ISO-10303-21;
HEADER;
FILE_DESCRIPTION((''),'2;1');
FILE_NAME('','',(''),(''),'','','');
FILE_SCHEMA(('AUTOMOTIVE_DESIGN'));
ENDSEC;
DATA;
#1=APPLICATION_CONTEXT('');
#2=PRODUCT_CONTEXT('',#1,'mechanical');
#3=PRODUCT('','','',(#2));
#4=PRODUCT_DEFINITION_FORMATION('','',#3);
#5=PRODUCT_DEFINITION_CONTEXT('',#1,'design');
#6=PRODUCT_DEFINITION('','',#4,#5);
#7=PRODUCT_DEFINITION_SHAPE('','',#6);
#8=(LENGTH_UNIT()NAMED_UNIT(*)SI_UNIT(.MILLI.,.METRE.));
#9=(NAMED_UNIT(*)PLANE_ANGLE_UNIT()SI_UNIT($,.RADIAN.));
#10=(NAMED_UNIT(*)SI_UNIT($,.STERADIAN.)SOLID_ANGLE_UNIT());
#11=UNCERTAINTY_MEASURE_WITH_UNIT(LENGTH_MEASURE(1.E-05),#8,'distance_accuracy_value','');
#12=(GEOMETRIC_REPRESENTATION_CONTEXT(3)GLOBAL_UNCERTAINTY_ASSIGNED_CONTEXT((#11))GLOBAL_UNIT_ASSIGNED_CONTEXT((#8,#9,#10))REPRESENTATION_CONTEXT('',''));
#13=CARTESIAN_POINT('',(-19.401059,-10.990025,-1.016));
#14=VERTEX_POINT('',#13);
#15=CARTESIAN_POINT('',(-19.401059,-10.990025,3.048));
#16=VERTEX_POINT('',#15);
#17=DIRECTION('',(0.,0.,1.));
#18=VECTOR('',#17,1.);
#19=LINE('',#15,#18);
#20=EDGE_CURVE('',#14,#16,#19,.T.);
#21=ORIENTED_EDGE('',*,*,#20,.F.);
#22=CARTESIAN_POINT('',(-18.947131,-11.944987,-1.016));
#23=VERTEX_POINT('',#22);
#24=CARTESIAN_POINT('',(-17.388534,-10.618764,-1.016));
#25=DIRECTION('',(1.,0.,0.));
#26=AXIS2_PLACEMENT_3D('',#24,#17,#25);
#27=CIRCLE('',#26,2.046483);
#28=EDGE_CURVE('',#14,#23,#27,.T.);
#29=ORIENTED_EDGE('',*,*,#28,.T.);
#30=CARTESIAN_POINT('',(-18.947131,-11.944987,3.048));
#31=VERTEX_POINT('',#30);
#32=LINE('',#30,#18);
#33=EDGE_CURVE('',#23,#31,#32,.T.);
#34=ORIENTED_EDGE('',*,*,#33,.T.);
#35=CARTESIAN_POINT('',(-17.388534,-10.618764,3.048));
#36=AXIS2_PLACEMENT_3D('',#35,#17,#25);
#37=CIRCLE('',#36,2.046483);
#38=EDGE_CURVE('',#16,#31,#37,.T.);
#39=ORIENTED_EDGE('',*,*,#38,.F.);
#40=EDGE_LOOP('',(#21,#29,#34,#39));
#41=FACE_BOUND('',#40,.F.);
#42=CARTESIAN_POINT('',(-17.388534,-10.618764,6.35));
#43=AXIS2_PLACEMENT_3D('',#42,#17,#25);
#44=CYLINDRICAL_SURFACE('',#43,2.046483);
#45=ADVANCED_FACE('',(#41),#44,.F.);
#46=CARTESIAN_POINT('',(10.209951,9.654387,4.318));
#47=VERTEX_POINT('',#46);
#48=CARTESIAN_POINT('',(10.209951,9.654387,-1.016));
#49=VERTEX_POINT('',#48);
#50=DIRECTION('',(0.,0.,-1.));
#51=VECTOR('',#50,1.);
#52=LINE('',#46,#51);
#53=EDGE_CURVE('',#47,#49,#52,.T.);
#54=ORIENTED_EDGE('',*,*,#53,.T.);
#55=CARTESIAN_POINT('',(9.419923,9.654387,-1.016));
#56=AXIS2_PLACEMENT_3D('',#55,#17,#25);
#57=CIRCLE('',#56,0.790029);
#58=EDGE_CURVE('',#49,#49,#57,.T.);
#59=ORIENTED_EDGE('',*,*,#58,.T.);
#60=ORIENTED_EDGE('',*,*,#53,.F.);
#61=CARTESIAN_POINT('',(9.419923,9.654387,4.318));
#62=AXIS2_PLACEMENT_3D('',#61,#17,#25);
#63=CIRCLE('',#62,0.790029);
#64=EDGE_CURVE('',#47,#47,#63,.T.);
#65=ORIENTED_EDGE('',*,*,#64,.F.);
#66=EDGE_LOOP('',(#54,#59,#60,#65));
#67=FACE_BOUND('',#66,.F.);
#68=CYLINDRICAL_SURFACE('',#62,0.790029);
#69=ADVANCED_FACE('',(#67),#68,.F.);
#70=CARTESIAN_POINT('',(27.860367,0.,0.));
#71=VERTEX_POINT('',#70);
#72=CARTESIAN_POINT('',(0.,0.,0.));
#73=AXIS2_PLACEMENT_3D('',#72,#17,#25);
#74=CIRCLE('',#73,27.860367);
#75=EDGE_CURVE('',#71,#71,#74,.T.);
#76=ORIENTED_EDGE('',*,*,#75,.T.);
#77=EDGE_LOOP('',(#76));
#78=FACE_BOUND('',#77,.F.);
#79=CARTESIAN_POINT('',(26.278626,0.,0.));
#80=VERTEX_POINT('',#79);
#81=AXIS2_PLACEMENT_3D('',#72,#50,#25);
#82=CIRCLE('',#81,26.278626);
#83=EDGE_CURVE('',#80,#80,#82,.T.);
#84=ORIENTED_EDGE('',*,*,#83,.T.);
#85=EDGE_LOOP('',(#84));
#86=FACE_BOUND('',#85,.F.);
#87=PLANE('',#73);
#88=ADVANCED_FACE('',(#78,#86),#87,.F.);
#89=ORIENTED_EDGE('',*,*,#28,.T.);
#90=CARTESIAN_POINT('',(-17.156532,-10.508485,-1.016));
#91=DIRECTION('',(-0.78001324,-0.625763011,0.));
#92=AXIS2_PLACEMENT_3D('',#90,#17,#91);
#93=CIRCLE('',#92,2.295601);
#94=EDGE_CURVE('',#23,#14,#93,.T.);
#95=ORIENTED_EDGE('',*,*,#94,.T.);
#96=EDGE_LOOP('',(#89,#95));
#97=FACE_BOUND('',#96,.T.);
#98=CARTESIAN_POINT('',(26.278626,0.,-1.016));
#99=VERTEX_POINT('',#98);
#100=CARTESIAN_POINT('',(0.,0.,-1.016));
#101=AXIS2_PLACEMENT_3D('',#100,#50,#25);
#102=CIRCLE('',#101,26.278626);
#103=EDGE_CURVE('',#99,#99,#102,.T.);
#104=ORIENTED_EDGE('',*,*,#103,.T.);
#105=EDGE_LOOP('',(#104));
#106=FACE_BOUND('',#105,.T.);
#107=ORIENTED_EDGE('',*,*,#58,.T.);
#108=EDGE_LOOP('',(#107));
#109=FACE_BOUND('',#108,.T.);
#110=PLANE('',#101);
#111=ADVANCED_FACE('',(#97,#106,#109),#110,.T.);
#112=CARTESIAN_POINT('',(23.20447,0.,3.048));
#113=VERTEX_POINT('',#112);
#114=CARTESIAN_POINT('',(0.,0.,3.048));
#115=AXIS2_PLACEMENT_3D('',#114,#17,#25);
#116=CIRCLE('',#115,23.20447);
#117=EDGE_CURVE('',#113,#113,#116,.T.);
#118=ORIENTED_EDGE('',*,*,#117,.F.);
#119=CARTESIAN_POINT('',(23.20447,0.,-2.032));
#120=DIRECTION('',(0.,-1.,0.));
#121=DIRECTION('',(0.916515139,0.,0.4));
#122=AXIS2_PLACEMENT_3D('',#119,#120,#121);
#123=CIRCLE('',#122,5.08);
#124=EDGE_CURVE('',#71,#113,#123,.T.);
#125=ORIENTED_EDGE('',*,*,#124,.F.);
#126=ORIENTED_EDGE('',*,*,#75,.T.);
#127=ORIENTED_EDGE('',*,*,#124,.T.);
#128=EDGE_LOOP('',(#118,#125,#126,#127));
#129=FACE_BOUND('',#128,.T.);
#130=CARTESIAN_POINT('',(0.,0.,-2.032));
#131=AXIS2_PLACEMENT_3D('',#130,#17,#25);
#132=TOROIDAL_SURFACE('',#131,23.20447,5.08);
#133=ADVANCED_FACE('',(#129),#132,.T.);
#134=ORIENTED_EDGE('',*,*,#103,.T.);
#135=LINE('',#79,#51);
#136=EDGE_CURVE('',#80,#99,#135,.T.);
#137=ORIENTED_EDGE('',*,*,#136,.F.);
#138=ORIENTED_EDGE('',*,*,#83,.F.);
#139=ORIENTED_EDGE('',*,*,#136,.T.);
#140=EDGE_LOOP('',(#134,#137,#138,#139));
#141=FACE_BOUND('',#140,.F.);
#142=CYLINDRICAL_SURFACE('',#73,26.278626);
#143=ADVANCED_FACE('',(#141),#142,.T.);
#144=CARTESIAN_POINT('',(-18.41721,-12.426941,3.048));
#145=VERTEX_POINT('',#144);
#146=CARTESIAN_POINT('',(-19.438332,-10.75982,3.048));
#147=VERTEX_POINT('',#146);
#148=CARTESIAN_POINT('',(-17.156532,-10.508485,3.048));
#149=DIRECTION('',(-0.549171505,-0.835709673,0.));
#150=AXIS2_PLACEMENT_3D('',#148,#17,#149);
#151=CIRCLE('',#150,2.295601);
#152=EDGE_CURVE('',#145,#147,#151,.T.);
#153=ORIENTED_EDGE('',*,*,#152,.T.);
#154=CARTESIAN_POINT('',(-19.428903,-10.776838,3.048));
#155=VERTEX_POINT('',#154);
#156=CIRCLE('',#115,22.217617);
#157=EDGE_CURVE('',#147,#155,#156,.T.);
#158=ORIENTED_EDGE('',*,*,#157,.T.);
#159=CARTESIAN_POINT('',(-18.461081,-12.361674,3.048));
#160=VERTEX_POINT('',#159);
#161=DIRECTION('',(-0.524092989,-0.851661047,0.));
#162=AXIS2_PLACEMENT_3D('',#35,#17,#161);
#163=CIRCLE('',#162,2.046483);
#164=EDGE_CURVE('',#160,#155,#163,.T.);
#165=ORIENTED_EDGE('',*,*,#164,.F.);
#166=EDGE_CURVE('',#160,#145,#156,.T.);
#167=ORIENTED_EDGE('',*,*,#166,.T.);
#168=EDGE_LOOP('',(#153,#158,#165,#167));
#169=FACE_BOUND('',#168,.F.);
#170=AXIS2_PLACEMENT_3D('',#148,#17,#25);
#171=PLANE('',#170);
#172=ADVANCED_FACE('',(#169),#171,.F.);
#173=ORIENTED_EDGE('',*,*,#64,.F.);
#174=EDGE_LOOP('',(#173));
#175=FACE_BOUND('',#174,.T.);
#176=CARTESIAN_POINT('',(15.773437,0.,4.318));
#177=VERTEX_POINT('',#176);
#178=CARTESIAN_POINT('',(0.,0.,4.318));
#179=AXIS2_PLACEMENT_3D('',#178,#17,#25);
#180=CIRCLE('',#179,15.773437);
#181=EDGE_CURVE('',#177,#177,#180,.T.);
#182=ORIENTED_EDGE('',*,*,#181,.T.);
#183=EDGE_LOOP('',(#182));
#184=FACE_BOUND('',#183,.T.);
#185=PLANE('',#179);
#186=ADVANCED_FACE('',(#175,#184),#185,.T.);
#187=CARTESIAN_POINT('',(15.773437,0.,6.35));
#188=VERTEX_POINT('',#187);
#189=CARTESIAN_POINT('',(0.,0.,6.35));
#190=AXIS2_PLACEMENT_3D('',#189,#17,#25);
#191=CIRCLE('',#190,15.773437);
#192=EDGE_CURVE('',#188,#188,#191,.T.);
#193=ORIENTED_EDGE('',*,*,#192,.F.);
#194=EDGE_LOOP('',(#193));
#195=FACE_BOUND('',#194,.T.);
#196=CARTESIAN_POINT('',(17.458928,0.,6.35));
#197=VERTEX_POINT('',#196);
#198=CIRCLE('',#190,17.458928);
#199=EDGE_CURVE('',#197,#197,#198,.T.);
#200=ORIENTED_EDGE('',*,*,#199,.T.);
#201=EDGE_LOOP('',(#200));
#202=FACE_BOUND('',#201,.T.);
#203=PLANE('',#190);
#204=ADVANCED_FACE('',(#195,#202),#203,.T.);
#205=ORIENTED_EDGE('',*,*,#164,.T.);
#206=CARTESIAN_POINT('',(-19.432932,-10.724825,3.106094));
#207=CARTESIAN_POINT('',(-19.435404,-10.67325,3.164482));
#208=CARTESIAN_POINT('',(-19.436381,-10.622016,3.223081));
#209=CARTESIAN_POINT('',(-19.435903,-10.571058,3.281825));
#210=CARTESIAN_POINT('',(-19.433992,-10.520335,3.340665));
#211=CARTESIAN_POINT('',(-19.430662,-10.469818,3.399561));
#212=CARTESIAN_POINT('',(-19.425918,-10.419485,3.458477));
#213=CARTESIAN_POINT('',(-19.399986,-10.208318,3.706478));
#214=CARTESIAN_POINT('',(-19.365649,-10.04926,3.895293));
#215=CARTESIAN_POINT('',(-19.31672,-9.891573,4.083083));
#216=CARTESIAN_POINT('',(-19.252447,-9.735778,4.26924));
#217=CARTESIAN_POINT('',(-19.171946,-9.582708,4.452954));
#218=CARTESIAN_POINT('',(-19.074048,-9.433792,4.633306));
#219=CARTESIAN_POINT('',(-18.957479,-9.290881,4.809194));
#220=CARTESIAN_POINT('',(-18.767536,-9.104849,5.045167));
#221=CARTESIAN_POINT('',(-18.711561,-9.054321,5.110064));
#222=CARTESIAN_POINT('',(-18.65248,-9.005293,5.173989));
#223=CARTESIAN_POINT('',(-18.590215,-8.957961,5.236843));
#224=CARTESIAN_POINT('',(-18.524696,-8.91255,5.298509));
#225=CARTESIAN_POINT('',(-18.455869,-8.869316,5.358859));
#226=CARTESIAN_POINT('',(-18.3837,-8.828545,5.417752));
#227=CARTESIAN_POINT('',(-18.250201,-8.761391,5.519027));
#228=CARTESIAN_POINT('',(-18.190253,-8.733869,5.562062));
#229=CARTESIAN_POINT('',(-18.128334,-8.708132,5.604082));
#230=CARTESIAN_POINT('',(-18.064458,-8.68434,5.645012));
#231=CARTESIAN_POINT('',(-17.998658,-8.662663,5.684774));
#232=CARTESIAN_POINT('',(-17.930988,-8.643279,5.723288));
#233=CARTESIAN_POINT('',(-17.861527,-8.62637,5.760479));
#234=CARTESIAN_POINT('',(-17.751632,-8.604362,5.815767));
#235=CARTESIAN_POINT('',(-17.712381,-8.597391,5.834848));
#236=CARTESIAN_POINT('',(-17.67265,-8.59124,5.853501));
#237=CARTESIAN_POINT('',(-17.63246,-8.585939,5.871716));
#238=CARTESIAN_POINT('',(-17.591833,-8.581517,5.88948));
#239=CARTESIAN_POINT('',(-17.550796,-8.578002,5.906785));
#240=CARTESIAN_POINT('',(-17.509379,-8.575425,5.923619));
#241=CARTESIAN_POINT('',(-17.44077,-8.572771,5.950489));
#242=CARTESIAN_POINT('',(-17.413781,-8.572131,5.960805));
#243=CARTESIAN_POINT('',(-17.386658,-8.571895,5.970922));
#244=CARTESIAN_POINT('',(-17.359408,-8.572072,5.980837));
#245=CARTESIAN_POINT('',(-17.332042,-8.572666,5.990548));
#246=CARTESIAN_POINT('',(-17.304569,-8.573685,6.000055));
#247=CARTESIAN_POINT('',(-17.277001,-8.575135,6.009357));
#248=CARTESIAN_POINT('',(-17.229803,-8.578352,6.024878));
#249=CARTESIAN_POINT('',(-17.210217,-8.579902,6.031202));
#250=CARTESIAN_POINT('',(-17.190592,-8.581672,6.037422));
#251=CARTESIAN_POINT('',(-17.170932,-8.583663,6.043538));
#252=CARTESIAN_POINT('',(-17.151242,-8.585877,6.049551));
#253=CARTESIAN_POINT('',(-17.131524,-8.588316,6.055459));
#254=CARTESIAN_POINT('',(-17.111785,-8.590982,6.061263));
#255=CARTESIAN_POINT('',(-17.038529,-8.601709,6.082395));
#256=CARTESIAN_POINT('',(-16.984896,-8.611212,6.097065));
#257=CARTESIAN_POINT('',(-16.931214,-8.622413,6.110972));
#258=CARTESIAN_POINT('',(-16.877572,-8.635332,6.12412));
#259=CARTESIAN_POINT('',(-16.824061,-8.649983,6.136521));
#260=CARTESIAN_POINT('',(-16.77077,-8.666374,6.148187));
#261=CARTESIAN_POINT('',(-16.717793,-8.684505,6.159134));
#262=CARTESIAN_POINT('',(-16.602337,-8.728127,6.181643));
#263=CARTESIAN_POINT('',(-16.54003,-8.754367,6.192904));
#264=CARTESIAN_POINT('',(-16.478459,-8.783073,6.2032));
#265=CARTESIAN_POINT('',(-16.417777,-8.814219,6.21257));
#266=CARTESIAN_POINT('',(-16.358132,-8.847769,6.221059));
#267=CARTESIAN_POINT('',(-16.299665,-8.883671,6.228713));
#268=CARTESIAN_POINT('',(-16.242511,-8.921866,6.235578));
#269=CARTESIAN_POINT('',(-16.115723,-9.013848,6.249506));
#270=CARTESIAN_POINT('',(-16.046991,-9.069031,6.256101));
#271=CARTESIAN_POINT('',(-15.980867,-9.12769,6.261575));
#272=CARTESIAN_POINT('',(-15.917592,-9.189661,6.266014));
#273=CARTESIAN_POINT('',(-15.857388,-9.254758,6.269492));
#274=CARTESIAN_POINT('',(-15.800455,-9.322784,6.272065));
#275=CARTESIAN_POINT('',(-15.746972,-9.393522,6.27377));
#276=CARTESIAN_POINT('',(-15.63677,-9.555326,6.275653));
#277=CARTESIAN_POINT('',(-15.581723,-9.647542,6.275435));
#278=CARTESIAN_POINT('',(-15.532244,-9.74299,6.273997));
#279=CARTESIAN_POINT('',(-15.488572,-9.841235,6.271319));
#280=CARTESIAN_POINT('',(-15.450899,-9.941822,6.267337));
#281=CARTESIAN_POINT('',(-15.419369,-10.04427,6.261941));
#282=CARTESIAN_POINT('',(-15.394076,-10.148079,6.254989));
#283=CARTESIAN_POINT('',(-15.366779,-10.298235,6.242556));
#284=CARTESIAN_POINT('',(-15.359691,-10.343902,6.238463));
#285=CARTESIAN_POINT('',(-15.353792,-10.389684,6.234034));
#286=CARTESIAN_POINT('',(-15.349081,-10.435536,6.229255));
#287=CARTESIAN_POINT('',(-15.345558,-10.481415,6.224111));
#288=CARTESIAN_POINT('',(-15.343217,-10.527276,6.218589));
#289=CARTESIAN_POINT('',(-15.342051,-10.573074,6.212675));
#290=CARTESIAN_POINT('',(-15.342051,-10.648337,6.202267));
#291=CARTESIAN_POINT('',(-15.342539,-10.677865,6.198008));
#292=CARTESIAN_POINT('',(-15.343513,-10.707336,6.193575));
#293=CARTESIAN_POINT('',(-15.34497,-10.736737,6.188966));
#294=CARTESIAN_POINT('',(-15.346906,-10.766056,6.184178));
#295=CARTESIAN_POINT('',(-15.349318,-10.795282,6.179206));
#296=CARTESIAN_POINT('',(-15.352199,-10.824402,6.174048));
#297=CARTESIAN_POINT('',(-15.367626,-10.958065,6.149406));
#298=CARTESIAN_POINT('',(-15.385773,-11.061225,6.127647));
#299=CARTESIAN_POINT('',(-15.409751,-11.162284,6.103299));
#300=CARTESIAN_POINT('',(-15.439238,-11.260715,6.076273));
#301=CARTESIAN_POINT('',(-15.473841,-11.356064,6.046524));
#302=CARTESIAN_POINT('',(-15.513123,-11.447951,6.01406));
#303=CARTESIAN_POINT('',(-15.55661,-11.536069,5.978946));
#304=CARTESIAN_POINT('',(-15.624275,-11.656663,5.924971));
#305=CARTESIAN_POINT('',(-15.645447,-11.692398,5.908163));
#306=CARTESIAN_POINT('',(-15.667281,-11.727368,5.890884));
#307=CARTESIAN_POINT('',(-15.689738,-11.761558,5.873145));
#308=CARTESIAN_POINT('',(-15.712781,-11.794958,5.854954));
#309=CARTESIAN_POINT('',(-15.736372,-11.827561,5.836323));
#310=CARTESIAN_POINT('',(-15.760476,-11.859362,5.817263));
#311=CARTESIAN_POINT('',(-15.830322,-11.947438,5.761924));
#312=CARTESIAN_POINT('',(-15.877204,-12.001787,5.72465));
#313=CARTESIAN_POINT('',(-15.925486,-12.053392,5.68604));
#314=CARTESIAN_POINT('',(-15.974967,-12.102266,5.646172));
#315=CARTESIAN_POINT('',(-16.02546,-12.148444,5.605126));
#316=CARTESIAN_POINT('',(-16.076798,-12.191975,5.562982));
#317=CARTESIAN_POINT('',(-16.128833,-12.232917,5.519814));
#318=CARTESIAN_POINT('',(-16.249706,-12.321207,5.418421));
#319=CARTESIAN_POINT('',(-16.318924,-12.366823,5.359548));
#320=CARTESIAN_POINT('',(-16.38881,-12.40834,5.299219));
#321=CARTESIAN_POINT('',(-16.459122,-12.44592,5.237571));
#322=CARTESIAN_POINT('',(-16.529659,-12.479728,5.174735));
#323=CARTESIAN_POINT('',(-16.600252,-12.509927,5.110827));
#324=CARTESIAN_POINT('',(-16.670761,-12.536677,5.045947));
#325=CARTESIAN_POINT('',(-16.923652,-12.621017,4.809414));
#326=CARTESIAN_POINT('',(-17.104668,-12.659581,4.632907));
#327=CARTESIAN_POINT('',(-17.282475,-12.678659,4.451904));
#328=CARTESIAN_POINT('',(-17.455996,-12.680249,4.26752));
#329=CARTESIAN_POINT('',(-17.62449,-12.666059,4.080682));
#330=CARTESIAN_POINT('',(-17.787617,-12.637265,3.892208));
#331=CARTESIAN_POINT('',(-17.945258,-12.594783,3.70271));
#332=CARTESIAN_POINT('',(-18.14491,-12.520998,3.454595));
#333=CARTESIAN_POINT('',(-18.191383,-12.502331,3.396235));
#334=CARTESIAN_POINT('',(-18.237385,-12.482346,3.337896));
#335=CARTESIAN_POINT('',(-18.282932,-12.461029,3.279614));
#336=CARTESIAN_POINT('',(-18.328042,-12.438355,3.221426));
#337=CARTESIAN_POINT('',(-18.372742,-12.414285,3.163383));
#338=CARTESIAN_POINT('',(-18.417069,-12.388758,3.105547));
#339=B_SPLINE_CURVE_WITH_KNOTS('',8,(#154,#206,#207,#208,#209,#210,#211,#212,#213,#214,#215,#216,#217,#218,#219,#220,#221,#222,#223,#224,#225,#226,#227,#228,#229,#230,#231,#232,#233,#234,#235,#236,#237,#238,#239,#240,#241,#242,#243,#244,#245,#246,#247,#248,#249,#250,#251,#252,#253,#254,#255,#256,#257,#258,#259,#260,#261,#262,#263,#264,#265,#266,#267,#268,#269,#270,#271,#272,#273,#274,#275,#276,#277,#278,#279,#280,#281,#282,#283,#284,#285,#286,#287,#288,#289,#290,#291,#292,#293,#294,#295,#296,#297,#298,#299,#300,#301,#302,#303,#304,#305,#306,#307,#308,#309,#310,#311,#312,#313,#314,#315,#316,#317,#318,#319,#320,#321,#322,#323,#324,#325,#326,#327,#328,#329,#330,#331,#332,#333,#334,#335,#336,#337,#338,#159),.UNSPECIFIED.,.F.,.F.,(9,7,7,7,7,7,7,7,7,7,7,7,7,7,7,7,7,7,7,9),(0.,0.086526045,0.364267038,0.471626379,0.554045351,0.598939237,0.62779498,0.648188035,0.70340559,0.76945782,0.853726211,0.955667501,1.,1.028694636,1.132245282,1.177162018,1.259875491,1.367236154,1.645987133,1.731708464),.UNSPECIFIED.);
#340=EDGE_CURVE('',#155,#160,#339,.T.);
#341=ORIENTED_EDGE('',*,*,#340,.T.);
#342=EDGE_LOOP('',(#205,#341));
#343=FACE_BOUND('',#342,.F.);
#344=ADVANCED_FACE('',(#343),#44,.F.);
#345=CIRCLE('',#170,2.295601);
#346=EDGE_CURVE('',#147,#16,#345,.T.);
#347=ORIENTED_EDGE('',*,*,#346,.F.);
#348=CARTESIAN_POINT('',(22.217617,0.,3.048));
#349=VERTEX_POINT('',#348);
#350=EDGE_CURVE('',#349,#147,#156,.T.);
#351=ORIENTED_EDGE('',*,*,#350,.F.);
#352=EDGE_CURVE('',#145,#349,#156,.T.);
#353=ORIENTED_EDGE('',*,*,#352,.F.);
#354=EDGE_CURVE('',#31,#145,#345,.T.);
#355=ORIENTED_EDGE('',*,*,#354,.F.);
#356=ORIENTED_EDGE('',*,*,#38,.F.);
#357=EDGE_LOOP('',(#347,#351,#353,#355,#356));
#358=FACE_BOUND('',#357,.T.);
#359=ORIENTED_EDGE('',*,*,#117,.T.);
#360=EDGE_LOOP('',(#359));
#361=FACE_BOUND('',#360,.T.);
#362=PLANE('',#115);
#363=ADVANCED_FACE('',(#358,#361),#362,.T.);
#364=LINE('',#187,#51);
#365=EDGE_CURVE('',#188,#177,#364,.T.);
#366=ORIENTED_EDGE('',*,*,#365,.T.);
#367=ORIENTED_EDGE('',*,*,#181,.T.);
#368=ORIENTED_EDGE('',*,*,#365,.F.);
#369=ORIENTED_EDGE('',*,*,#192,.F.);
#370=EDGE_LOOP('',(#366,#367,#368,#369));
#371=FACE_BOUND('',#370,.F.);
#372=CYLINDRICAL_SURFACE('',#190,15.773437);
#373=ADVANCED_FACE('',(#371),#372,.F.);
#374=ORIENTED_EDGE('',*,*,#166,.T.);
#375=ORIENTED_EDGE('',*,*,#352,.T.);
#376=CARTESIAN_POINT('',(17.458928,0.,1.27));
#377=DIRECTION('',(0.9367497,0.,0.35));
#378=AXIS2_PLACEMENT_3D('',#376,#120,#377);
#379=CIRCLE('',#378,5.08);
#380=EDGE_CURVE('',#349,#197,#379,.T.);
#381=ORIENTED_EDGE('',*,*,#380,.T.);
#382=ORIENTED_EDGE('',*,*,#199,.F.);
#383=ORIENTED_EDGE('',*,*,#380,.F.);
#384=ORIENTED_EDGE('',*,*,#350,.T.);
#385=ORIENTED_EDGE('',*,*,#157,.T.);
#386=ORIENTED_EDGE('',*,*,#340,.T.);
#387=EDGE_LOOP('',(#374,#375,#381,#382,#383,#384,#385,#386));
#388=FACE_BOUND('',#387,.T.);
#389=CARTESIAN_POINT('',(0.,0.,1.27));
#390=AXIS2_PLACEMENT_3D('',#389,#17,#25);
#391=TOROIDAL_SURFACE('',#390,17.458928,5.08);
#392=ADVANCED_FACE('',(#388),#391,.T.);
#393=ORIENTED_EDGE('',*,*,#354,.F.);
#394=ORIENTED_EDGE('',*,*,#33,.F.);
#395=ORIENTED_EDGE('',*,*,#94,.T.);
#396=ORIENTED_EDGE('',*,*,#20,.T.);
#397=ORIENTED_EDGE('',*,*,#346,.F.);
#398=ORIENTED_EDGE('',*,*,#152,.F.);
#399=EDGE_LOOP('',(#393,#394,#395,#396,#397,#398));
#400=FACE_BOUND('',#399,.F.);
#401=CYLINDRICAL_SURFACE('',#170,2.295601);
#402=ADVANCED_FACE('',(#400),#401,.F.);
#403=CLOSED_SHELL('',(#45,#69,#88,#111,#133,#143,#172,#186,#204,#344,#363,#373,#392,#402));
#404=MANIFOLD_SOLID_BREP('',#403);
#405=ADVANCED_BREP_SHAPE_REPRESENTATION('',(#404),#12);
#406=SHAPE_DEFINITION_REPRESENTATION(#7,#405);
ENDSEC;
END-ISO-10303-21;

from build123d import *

# Parameters (mm, degrees)
F0_R      = 27.8603665739
F1_DEPTH  = 3.048
F4_R      = 26.2786257822
F5_DEPTH  = 1.016
F6_R      = 22.2176168744
F7_DEPTH  = 3.302
F9_R      = 15.773437446
F10_DEPTH = 2.032
F11_R     = 2.2956006308
F12_DEPTH = 21.336
F13_R     = 2.0464830212
F14_DEPTH = 25.4
F15_R     = 0.7900286513
F16_DEPTH = 25.4


# Not quite as in the source:
# - a fillet or chamfer that OpenCascade refuses, or shapes differently, is made with other operations: its cross-section is extruded or revolved along the edge and cut away or added


with BuildPart() as f1:
    # F0 (on Top) → F1 (new body)
    with BuildSketch(Plane.XY):
        Circle(F0_R)
    extrude(amount=F1_DEPTH)

    # F2: fillet of radius 5.08 on 1 edges, made by hand

    # F2_s1 → F2_t2 (revolve, cut)
    with BuildSketch(Plane.XZ):
        with BuildLine():
            ThreePointArc((27.8603665739, 0), (25.9869002599, 2.2182329348), (23.2044696678, 3.048))
            Line((23.2044696678, 3.048), (27.8603665739, 3.048))
            Line((27.8603665739, 3.048), (27.8603665739, 0))
        make_face()
    revolve(axis=Axis((0, 0, 3.048), (0, 0, 1)), mode=Mode.SUBTRACT)

    # F4 (on face) → F5 (join)
    with BuildSketch(Plane(origin=(0, 0, 0), x_dir=(1, 0, 0), z_dir=(0, 0, -1))):
        Circle(F4_R)
    extrude(amount=F5_DEPTH)

    # F6 (on face) → F7 (join)
    with BuildSketch(Plane.XY.offset(3.048)):
        Circle(F6_R)
    extrude(amount=F7_DEPTH)

    # F8: fillet of radius 5.08 on 1 edges, made by hand

    # F8_s1 → F8_t2 (revolve, cut)
    with BuildSketch(Plane.XZ):
        with BuildLine():
            ThreePointArc((22.2176168744, 3.048), (20.3549739793, 5.4436458882), (17.4589283996, 6.35))
            Line((17.4589283996, 6.35), (22.2176168744, 6.35))
            Line((22.2176168744, 6.35), (22.2176168744, 3.048))
        make_face()
    revolve(axis=Axis((0, 0, 6.35), (0, 0, 1)), mode=Mode.SUBTRACT)

    # F9 (on face) → F10 (cut)
    with BuildSketch(Plane.XY.offset(6.35)):
        Circle(F9_R)
    extrude(amount=-F10_DEPTH, mode=Mode.SUBTRACT)

    # F11 (on face) → F12 (cut)
    with BuildSketch(Plane.XY.offset(3.048)):
        with Locations((-17.1565320343, -10.5084851384)):
            Circle(F11_R)
    extrude(amount=-F12_DEPTH, mode=Mode.SUBTRACT)

    # F13 (on face) → F14 (cut)
    with BuildSketch(Plane.XY.offset(6.35)):
        with Locations((-17.3885338008, -10.6187639758)):
            Circle(F13_R)
    extrude(amount=-F14_DEPTH, mode=Mode.SUBTRACT)

    # F15 (on face) → F16 (cut)
    with BuildSketch(Plane.XY.offset(4.318)):
        with Locations((9.4199227169, 9.6543869004)):
            Circle(F15_R)
    extrude(amount=-F16_DEPTH, mode=Mode.SUBTRACT)


solid = f1.part
